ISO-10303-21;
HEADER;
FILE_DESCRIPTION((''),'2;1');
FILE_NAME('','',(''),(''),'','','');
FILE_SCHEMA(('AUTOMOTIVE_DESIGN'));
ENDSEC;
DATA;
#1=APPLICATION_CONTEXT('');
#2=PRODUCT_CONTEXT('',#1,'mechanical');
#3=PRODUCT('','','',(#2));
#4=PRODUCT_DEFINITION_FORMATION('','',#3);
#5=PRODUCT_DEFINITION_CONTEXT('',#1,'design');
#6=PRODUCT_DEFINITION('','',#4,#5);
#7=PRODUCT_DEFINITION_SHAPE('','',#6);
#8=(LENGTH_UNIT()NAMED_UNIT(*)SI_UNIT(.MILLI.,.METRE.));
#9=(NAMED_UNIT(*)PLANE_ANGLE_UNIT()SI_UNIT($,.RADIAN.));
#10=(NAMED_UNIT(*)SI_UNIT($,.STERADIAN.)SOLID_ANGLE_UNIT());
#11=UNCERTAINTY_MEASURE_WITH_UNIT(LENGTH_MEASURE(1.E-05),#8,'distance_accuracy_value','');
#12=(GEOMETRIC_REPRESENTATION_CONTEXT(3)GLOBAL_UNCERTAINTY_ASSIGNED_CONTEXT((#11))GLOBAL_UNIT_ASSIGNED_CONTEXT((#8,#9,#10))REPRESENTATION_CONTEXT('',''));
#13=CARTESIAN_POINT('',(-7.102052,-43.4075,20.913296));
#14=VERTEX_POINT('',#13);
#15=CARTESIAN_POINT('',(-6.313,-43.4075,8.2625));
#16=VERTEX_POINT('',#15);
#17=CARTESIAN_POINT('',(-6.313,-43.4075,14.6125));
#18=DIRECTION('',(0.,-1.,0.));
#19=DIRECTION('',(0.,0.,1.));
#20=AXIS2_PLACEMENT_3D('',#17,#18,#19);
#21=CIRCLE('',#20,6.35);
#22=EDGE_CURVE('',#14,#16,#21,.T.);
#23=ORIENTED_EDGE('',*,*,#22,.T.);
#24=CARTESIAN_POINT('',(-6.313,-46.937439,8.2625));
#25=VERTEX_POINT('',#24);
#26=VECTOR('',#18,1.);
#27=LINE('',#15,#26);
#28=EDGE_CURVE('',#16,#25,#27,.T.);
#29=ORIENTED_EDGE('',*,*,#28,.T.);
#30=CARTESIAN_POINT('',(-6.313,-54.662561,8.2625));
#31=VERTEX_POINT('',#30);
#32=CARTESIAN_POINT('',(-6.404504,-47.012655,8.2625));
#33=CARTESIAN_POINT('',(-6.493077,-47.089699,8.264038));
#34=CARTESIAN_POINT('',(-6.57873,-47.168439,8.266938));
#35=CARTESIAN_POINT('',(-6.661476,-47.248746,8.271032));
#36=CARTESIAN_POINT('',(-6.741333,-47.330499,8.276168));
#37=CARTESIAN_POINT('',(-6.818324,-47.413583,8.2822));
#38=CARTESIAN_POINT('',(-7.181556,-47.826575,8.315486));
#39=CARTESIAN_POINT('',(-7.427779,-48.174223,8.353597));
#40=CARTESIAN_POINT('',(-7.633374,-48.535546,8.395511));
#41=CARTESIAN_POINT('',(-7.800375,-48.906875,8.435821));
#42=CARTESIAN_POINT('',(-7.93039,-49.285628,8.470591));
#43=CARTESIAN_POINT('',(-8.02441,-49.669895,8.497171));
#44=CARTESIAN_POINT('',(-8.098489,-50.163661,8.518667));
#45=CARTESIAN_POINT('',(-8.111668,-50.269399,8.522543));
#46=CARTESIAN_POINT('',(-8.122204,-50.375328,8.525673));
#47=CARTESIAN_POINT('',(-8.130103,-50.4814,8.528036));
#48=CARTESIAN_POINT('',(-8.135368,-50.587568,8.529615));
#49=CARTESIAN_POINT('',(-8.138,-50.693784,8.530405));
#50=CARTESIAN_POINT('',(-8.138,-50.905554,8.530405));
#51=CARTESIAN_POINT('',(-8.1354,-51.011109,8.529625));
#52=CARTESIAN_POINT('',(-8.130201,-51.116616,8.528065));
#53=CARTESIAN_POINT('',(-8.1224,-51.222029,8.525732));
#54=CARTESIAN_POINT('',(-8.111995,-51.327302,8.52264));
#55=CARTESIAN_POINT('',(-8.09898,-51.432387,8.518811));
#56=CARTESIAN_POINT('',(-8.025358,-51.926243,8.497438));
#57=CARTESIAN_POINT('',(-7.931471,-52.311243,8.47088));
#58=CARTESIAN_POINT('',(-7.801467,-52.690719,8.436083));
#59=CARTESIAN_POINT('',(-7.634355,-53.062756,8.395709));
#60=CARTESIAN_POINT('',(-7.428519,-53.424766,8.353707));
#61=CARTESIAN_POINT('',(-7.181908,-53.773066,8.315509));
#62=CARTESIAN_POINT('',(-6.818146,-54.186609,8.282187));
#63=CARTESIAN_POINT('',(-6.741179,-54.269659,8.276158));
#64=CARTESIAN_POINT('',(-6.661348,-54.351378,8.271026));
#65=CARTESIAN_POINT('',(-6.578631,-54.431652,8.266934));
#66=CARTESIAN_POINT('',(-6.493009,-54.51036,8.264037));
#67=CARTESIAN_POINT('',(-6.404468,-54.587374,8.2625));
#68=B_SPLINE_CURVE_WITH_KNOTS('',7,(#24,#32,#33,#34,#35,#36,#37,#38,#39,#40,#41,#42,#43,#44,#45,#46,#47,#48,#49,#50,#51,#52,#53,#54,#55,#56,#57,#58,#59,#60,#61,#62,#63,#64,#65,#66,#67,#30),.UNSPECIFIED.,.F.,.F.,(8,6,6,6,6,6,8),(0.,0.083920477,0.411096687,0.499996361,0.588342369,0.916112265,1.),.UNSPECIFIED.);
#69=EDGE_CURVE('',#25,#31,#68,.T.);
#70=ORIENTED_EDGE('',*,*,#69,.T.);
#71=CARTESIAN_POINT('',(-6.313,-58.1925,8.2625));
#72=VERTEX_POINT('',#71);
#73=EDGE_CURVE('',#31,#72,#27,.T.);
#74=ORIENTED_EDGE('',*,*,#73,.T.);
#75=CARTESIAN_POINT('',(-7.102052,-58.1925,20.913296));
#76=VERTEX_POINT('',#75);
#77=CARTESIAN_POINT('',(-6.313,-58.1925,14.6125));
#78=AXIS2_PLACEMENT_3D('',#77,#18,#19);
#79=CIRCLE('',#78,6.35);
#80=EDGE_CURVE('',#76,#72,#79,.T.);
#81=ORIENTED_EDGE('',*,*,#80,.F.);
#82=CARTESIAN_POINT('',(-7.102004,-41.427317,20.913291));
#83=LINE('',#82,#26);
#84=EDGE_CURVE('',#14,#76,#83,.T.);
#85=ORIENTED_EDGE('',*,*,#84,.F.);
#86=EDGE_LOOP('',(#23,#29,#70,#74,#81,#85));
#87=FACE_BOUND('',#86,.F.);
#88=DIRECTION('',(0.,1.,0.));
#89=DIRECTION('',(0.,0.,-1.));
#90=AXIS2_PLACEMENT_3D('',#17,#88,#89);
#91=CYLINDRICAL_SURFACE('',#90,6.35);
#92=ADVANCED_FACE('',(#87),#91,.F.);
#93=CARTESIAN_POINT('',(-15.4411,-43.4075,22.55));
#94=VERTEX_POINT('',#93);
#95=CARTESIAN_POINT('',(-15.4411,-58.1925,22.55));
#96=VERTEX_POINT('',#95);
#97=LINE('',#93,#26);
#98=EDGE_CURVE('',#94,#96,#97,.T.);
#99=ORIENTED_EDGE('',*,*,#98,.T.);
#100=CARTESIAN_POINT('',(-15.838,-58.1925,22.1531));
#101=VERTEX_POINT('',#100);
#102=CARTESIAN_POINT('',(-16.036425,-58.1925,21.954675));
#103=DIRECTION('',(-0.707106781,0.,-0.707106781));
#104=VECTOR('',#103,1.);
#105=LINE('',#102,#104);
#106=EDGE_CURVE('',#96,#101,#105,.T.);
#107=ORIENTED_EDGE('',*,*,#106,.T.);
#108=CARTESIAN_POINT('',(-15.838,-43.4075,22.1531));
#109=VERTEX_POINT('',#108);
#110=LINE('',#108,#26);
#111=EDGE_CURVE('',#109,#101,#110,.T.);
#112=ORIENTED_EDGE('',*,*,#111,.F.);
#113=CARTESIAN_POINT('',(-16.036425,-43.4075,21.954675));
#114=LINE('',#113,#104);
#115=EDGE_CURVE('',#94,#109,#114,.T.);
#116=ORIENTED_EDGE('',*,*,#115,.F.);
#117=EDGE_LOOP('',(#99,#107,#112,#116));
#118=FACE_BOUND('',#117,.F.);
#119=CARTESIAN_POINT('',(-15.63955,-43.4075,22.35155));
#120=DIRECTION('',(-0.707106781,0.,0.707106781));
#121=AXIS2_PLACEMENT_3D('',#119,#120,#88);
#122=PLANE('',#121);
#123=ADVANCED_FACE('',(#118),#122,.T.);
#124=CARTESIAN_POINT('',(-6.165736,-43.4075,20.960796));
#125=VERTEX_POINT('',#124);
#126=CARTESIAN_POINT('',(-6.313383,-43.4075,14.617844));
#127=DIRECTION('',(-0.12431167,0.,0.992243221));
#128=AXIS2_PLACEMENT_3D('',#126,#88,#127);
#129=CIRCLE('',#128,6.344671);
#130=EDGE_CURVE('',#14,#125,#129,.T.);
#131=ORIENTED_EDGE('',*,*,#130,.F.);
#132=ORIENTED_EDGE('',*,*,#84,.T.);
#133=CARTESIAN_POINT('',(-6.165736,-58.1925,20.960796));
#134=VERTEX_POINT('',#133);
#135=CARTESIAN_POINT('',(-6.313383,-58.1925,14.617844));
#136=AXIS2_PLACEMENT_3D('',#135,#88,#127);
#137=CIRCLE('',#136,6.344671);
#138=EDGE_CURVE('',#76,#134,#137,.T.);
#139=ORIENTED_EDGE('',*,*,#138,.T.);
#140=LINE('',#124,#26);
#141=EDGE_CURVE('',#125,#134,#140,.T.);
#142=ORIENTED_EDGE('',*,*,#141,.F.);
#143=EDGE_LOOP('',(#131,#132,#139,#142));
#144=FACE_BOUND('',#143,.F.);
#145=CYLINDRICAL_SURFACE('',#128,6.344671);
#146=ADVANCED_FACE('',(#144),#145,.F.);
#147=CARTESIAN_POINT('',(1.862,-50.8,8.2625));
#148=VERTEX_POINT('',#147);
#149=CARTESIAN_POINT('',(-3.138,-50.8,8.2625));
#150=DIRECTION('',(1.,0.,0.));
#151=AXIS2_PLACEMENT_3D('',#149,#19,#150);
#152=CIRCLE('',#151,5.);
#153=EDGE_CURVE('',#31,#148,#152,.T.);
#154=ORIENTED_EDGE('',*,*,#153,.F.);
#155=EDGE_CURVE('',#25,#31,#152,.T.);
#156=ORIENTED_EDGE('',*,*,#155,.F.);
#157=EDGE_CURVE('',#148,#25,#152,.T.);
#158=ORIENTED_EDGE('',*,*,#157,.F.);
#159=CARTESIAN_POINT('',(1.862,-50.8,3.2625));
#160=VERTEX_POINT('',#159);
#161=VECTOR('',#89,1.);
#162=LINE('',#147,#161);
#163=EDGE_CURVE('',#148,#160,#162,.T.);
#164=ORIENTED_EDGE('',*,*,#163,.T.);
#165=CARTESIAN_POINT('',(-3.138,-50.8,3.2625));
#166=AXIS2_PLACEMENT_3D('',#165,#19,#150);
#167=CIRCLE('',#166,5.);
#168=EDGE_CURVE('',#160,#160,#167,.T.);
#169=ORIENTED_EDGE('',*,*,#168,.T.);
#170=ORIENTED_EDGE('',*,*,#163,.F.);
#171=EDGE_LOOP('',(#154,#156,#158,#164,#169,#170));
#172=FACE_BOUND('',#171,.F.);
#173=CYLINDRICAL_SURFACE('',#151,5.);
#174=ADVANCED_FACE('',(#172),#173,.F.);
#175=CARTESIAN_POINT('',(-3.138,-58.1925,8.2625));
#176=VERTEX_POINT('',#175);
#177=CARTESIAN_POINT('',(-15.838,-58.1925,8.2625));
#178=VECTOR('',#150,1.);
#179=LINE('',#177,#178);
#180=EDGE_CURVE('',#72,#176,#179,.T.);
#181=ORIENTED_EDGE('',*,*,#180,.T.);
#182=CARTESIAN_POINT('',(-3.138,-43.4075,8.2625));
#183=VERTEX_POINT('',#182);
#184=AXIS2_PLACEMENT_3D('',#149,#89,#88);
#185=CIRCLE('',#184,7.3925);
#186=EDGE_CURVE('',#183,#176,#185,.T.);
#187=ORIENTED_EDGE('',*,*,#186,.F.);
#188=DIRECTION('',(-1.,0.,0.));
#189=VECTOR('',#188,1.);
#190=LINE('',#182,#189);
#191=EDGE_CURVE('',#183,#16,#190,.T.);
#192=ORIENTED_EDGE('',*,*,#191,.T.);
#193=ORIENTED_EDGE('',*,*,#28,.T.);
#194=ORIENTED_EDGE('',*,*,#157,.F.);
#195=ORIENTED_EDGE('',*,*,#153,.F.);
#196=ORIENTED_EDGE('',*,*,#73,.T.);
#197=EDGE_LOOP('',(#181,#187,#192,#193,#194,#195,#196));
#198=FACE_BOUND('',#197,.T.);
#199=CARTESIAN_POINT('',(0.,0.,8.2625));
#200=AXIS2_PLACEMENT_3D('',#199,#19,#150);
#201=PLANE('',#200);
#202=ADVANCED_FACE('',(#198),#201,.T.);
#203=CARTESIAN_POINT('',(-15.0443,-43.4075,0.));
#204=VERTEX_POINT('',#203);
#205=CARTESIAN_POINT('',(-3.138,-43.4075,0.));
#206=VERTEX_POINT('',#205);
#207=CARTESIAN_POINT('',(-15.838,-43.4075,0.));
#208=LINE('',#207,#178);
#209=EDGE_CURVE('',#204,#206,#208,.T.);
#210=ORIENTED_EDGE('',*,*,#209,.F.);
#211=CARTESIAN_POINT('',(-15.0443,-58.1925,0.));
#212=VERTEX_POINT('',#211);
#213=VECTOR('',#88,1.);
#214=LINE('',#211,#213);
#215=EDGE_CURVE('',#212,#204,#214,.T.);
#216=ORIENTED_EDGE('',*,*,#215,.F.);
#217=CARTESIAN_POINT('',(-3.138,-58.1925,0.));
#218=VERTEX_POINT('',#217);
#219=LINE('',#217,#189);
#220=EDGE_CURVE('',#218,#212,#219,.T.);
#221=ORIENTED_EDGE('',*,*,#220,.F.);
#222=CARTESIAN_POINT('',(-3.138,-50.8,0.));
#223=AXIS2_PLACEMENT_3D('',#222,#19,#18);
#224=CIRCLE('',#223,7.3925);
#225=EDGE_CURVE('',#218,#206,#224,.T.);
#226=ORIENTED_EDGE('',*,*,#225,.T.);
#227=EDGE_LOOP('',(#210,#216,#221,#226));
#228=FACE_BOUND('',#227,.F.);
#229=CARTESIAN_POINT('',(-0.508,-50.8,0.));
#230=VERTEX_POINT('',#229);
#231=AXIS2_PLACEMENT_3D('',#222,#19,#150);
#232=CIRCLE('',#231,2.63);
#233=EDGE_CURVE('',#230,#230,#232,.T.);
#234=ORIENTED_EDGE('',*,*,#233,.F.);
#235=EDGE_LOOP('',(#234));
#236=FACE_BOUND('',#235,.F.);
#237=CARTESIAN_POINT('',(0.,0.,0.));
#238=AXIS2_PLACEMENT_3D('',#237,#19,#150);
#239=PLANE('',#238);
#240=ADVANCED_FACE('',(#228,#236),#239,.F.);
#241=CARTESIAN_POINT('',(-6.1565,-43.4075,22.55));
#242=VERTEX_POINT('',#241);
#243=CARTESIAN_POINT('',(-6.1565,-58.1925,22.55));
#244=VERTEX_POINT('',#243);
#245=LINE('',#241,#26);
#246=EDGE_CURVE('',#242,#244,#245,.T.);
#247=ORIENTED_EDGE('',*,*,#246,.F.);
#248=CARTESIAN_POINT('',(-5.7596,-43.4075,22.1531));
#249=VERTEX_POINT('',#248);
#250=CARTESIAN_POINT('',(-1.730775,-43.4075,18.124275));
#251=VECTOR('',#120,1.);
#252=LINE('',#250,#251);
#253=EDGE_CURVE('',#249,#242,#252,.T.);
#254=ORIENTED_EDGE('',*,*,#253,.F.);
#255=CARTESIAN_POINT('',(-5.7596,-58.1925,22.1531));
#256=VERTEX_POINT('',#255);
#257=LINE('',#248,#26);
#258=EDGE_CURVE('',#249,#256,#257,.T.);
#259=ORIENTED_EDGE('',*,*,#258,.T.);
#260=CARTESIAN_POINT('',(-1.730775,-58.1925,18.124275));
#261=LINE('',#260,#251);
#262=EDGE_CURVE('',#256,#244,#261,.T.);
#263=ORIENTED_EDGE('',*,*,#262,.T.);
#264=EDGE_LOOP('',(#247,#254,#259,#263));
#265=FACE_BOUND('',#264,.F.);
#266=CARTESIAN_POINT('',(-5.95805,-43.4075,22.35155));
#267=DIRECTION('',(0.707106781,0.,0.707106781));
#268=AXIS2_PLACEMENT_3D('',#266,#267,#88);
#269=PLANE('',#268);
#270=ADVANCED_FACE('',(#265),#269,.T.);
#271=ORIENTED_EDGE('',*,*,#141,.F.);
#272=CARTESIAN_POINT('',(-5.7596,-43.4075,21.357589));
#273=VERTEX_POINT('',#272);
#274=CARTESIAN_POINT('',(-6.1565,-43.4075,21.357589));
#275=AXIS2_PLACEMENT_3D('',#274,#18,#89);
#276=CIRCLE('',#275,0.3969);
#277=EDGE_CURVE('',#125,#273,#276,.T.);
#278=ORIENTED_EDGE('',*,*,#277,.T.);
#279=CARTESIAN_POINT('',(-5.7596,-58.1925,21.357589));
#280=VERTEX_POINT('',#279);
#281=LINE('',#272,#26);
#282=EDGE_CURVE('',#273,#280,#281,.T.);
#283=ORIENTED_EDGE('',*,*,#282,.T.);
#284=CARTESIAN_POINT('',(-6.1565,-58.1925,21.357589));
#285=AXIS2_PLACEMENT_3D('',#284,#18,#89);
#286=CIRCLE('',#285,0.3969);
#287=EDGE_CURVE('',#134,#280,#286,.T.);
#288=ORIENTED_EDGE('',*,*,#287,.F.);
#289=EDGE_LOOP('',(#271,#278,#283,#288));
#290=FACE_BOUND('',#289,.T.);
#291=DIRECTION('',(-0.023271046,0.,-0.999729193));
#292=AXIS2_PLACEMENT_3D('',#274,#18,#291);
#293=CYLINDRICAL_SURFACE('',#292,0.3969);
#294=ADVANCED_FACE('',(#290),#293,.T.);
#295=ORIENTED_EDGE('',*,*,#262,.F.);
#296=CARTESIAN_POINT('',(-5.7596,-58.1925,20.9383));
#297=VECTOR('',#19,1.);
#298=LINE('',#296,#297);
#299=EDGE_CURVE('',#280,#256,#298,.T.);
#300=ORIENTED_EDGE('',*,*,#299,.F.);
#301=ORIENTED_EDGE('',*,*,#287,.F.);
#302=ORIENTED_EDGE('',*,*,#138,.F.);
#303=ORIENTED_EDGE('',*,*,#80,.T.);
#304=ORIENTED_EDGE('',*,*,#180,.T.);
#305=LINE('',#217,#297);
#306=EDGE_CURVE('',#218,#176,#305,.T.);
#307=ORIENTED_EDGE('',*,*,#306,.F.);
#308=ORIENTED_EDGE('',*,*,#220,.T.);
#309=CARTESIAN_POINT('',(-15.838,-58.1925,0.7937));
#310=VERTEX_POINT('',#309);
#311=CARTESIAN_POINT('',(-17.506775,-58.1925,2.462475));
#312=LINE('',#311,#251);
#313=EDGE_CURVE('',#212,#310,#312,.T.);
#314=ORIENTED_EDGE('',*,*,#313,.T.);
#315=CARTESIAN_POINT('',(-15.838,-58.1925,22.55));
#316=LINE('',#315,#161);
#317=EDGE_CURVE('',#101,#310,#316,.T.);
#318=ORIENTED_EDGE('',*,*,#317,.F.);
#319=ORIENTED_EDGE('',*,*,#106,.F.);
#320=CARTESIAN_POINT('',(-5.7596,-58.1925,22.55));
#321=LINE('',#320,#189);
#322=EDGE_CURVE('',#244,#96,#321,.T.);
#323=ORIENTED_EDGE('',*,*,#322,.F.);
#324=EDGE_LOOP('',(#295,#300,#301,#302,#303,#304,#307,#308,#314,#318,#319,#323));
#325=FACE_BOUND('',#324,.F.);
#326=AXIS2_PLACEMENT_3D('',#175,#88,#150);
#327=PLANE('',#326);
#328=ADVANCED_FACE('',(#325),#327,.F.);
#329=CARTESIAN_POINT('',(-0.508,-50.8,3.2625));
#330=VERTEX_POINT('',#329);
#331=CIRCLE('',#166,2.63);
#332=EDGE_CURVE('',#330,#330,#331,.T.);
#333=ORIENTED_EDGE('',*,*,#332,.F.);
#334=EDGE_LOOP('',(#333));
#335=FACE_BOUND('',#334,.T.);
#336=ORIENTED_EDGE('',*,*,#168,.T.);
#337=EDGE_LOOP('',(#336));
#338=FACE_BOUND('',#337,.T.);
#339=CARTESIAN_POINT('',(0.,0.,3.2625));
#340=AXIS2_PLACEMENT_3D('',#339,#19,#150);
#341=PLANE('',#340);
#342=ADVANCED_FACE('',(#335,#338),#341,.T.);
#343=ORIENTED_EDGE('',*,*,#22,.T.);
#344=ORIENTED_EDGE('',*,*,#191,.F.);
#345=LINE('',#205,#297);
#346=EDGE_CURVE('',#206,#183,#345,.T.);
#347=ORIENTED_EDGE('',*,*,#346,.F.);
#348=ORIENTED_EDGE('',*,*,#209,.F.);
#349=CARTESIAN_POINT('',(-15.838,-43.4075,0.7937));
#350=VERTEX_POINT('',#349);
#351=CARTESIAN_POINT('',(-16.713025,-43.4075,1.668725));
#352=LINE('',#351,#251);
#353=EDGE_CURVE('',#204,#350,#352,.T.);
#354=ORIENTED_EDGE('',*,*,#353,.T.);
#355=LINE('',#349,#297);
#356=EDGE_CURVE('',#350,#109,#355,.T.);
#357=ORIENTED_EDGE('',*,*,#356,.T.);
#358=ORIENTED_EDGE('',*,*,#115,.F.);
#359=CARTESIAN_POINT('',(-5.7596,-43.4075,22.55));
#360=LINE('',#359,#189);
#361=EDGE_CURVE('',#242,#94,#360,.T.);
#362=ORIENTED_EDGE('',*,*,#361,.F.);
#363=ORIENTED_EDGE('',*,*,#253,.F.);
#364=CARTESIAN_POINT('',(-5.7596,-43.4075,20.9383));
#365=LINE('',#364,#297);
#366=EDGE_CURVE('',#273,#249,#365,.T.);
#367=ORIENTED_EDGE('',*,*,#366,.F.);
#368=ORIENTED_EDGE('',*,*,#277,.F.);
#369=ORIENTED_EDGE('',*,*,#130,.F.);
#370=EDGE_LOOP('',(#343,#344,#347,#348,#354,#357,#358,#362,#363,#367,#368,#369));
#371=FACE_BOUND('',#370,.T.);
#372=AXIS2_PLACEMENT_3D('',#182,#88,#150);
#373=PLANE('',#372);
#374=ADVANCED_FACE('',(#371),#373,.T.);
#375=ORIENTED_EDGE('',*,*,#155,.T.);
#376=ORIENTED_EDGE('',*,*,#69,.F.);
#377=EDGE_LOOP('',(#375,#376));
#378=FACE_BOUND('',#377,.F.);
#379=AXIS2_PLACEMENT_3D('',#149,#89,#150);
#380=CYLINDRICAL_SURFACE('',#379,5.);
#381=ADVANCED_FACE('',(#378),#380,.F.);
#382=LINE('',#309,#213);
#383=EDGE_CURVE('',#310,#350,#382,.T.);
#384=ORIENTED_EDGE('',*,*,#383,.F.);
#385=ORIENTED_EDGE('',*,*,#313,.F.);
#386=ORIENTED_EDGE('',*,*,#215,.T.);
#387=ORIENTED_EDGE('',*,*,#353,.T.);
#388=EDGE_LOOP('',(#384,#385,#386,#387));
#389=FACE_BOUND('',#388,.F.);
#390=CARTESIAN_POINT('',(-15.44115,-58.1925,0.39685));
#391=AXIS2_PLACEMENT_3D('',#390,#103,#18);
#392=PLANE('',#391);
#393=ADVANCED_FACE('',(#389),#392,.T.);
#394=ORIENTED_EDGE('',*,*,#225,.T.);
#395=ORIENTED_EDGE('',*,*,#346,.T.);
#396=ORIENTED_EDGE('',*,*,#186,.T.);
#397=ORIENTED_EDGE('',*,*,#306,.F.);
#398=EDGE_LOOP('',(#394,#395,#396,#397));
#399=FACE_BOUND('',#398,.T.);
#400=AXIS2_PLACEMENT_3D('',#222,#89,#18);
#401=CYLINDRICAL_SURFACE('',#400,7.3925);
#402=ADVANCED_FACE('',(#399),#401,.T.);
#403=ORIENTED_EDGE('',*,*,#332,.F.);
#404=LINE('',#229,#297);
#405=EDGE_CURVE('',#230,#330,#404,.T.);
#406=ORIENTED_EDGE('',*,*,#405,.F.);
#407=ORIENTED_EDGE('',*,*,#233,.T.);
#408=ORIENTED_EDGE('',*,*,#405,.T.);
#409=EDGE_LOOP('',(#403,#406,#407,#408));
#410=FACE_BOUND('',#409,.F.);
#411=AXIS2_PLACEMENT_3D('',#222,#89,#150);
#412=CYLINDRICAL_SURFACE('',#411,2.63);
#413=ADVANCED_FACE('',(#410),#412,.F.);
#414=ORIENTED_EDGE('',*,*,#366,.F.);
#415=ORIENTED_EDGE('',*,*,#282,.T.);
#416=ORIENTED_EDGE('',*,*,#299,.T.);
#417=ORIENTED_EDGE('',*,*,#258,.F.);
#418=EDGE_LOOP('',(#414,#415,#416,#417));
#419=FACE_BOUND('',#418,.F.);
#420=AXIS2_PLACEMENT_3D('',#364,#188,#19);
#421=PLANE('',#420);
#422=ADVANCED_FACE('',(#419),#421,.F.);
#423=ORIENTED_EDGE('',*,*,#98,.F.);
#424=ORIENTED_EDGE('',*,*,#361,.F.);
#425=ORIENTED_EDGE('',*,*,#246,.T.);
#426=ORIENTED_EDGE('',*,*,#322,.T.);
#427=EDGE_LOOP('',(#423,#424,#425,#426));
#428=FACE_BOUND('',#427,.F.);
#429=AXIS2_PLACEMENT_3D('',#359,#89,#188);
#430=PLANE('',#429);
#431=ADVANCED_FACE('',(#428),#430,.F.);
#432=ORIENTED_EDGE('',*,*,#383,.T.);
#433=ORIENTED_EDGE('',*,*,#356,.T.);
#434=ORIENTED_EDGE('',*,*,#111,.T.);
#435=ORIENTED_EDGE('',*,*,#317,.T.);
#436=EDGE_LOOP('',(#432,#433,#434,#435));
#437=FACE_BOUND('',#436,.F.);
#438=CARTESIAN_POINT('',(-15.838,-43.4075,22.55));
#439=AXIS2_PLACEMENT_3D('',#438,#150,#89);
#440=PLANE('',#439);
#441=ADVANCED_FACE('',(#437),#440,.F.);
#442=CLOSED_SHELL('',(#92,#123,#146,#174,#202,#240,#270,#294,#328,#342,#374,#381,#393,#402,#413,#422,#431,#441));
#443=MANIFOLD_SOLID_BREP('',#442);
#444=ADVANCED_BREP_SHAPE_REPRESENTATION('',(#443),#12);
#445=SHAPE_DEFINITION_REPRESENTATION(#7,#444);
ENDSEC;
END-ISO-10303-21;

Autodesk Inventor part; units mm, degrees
ref_plane "YZ Plane" through (0, 0, 0) normal (1, 0, 0) x (0, 1, 0)
ref_plane "XZ Plane" through (0, 0, 0) normal (0, 1, 0) x (-1, 0, 0)
ref_plane "Work Plane1" through (0, 0, 0) normal (0, 0, 1) x (1, 0, 0)
sketch "Sketch1" plane through (0, 0, 0) normal (0, 0, 1) x (1, 0, 0)
  line L0 (-0.508, 0) -> (-0.508, -400) projected
  line L1 (-5.768, 0) -> (-5.768, -400) projected
  circle A0 centre (-3.138, -50.8) radius 2.63
  line L2 (-13.138, 0) -> (-13.138, -400) projected
  circle A1 centre (-3.138, -50.8) radius 7.3925 construction
  line L3 (-3.138, -58.1925) -> (-15.838, -58.1925)
  line L4 (-15.838, -58.1925) -> (-15.838, -43.4075)
  line L5 (-15.838, -43.4075) -> (-3.138, -43.4075)
  arc A2 (-3.138, -58.1925) -> (-3.138, -43.4075) centre (-3.138, -50.8) ccw
  point P0 (0, 0)
  dimension "d0" = 5.26
  dimension "d1" = 10
  dimension "d2" = 4.7625
  dimension "d3" = 12.7
  dimension "d4" = 50.8
extrude "Extrusion1" add sketch "Sketch1" along normal blind 8.2625 contours A2 L0 | L0 A0 L1 L5 A2 | L0 A2 L3 L1 A0 | L1 L3 L2 L5 | L2 L3 L4 L5
sketch "Sketch2" plane through (0, 0, 8.2625) normal (0, 0, 1) x (1, 0, 0)
  line L0 (-15.838, -43.4075) -> (-15.838, -58.1925) projected
  line L1 (-15.838, -58.1925) -> (-3.138, -58.1925) projected
  arc A0 (-3.138, -58.1925) -> (-3.138, -43.4075) centre (-3.138, -50.8) ccw projected
  line L2 (-3.138, -43.4075) -> (-15.838, -43.4075) projected
  circle A1 centre (-3.138, -50.8) radius 2.63 projected
  line L3 (-3.138, -43.4075) -> (-15.838, -43.4075) projected
  line L4 (-12.663, -43.4075) -> (-12.663, -58.1925)
  point P0 (0, 0)
  dimension "d7" = 3.175
extrude "Extrusion2" add sketch "Sketch2" along normal blind 12.7 contours L2 L4 L1 L0
sketch "Sketch3" plane through (-15.838, -43.4075, 0) normal (0, 1, 0) x (1, 0, 0)
  circle A0 centre (9.525, -14.6125) radius 6.35 construction
  line L0 (12.7, -8.2625) -> (3.175, -8.2625) projected
  line L1 (3.175, -8.2625) -> (3.175, -20.9625) projected
  line L2 (3.175, -20.9625) -> (9.525, -20.9625)
  arc A1 (9.525, -8.2625) -> (9.525, -20.9625) centre (9.525, -14.6125) ccw
  point P0 (15.838, 0)
  point P1 (3.175, -14.6125)
  dimension "d10" = 12.7
extrude "Extrusion3" add sketch "Sketch3" against normal up to surface (14.785 mm away)
fillet "Fillet1" radius 0.0247 1 edges at (-6.313, -50.8, 20.9625)
chamfer "Chamfer1" distance 0.7937 angle 45 2 edges at (-15.838, -50.8, 0) (-15.838, -50.8, 20.9625)
sketch "Sketch4" plane through (-3.138, -43.4075, 8.2625) normal (0, 1, 0) x (1, 0, 0)
  arc A0 (-3.175, 0) -> (-3.9641, -12.6508) centre (-3.175, -6.35) ccw projected
  arc A1 (-3.9641, -12.6508) -> (-2.6216, -12.6758) centre (-3.175, -6.35) ccw
  arc A2 (-3.9672, -12.7) -> (-3.9641, -12.6508) centre (-3.9672, -12.6753) ccw projected
  line L0 (-3.175, -6.35) -> (-2.6216, -12.6758) construction
  line L1 (-3.175, -6.35) -> (-3.175, -12.7) construction
  line L2 (-2.6216, -12.6758) -> (-2.6216, -14.2875)
  line L3 (-2.6216, -14.2875) -> (-12.7, -14.2875)
  line L4 (-11.9062, -12.7) -> (-12.7, -11.9062) projected
  line L5 (-12.7, -14.2875) -> (-12.7, -11.9062)
  line L6 (-11.9062, -12.7) -> (-3.9672, -12.7) projected
  point P0 (3.138, 8.2625)
  point P1 (-3.9425, -12.6768)
  dimension "d18" = 5
  dimension "d19" = 1.5875
extrude "Extrusion4" add sketch "Sketch4" against normal up to surface (14.785 mm away)
fillet "Fillet2" radius 0.3969 1 edges at (-5.7596, -50.8, 20.9383)
chamfer "Chamfer2" distance 0.3969 angle 45 2 edges at (-5.7596, -50.8, 22.55) (-15.838, -50.8, 22.55)
sketch "Sketch5" plane through (0, 0, 8.2625) normal (0, 0, 1) x (1, 0, 0)
  circle A0 centre (-3.138, -50.8) radius 2.63 projected
  circle A1 centre (-3.138, -50.8) radius 5
  point P0 (0, 0)
  dimension "d26" = 10
extrude "Extrusion5" cut sketch "Sketch5" along normal mid plane 10
properties part number "CNC-029-WireConduitHolder"
